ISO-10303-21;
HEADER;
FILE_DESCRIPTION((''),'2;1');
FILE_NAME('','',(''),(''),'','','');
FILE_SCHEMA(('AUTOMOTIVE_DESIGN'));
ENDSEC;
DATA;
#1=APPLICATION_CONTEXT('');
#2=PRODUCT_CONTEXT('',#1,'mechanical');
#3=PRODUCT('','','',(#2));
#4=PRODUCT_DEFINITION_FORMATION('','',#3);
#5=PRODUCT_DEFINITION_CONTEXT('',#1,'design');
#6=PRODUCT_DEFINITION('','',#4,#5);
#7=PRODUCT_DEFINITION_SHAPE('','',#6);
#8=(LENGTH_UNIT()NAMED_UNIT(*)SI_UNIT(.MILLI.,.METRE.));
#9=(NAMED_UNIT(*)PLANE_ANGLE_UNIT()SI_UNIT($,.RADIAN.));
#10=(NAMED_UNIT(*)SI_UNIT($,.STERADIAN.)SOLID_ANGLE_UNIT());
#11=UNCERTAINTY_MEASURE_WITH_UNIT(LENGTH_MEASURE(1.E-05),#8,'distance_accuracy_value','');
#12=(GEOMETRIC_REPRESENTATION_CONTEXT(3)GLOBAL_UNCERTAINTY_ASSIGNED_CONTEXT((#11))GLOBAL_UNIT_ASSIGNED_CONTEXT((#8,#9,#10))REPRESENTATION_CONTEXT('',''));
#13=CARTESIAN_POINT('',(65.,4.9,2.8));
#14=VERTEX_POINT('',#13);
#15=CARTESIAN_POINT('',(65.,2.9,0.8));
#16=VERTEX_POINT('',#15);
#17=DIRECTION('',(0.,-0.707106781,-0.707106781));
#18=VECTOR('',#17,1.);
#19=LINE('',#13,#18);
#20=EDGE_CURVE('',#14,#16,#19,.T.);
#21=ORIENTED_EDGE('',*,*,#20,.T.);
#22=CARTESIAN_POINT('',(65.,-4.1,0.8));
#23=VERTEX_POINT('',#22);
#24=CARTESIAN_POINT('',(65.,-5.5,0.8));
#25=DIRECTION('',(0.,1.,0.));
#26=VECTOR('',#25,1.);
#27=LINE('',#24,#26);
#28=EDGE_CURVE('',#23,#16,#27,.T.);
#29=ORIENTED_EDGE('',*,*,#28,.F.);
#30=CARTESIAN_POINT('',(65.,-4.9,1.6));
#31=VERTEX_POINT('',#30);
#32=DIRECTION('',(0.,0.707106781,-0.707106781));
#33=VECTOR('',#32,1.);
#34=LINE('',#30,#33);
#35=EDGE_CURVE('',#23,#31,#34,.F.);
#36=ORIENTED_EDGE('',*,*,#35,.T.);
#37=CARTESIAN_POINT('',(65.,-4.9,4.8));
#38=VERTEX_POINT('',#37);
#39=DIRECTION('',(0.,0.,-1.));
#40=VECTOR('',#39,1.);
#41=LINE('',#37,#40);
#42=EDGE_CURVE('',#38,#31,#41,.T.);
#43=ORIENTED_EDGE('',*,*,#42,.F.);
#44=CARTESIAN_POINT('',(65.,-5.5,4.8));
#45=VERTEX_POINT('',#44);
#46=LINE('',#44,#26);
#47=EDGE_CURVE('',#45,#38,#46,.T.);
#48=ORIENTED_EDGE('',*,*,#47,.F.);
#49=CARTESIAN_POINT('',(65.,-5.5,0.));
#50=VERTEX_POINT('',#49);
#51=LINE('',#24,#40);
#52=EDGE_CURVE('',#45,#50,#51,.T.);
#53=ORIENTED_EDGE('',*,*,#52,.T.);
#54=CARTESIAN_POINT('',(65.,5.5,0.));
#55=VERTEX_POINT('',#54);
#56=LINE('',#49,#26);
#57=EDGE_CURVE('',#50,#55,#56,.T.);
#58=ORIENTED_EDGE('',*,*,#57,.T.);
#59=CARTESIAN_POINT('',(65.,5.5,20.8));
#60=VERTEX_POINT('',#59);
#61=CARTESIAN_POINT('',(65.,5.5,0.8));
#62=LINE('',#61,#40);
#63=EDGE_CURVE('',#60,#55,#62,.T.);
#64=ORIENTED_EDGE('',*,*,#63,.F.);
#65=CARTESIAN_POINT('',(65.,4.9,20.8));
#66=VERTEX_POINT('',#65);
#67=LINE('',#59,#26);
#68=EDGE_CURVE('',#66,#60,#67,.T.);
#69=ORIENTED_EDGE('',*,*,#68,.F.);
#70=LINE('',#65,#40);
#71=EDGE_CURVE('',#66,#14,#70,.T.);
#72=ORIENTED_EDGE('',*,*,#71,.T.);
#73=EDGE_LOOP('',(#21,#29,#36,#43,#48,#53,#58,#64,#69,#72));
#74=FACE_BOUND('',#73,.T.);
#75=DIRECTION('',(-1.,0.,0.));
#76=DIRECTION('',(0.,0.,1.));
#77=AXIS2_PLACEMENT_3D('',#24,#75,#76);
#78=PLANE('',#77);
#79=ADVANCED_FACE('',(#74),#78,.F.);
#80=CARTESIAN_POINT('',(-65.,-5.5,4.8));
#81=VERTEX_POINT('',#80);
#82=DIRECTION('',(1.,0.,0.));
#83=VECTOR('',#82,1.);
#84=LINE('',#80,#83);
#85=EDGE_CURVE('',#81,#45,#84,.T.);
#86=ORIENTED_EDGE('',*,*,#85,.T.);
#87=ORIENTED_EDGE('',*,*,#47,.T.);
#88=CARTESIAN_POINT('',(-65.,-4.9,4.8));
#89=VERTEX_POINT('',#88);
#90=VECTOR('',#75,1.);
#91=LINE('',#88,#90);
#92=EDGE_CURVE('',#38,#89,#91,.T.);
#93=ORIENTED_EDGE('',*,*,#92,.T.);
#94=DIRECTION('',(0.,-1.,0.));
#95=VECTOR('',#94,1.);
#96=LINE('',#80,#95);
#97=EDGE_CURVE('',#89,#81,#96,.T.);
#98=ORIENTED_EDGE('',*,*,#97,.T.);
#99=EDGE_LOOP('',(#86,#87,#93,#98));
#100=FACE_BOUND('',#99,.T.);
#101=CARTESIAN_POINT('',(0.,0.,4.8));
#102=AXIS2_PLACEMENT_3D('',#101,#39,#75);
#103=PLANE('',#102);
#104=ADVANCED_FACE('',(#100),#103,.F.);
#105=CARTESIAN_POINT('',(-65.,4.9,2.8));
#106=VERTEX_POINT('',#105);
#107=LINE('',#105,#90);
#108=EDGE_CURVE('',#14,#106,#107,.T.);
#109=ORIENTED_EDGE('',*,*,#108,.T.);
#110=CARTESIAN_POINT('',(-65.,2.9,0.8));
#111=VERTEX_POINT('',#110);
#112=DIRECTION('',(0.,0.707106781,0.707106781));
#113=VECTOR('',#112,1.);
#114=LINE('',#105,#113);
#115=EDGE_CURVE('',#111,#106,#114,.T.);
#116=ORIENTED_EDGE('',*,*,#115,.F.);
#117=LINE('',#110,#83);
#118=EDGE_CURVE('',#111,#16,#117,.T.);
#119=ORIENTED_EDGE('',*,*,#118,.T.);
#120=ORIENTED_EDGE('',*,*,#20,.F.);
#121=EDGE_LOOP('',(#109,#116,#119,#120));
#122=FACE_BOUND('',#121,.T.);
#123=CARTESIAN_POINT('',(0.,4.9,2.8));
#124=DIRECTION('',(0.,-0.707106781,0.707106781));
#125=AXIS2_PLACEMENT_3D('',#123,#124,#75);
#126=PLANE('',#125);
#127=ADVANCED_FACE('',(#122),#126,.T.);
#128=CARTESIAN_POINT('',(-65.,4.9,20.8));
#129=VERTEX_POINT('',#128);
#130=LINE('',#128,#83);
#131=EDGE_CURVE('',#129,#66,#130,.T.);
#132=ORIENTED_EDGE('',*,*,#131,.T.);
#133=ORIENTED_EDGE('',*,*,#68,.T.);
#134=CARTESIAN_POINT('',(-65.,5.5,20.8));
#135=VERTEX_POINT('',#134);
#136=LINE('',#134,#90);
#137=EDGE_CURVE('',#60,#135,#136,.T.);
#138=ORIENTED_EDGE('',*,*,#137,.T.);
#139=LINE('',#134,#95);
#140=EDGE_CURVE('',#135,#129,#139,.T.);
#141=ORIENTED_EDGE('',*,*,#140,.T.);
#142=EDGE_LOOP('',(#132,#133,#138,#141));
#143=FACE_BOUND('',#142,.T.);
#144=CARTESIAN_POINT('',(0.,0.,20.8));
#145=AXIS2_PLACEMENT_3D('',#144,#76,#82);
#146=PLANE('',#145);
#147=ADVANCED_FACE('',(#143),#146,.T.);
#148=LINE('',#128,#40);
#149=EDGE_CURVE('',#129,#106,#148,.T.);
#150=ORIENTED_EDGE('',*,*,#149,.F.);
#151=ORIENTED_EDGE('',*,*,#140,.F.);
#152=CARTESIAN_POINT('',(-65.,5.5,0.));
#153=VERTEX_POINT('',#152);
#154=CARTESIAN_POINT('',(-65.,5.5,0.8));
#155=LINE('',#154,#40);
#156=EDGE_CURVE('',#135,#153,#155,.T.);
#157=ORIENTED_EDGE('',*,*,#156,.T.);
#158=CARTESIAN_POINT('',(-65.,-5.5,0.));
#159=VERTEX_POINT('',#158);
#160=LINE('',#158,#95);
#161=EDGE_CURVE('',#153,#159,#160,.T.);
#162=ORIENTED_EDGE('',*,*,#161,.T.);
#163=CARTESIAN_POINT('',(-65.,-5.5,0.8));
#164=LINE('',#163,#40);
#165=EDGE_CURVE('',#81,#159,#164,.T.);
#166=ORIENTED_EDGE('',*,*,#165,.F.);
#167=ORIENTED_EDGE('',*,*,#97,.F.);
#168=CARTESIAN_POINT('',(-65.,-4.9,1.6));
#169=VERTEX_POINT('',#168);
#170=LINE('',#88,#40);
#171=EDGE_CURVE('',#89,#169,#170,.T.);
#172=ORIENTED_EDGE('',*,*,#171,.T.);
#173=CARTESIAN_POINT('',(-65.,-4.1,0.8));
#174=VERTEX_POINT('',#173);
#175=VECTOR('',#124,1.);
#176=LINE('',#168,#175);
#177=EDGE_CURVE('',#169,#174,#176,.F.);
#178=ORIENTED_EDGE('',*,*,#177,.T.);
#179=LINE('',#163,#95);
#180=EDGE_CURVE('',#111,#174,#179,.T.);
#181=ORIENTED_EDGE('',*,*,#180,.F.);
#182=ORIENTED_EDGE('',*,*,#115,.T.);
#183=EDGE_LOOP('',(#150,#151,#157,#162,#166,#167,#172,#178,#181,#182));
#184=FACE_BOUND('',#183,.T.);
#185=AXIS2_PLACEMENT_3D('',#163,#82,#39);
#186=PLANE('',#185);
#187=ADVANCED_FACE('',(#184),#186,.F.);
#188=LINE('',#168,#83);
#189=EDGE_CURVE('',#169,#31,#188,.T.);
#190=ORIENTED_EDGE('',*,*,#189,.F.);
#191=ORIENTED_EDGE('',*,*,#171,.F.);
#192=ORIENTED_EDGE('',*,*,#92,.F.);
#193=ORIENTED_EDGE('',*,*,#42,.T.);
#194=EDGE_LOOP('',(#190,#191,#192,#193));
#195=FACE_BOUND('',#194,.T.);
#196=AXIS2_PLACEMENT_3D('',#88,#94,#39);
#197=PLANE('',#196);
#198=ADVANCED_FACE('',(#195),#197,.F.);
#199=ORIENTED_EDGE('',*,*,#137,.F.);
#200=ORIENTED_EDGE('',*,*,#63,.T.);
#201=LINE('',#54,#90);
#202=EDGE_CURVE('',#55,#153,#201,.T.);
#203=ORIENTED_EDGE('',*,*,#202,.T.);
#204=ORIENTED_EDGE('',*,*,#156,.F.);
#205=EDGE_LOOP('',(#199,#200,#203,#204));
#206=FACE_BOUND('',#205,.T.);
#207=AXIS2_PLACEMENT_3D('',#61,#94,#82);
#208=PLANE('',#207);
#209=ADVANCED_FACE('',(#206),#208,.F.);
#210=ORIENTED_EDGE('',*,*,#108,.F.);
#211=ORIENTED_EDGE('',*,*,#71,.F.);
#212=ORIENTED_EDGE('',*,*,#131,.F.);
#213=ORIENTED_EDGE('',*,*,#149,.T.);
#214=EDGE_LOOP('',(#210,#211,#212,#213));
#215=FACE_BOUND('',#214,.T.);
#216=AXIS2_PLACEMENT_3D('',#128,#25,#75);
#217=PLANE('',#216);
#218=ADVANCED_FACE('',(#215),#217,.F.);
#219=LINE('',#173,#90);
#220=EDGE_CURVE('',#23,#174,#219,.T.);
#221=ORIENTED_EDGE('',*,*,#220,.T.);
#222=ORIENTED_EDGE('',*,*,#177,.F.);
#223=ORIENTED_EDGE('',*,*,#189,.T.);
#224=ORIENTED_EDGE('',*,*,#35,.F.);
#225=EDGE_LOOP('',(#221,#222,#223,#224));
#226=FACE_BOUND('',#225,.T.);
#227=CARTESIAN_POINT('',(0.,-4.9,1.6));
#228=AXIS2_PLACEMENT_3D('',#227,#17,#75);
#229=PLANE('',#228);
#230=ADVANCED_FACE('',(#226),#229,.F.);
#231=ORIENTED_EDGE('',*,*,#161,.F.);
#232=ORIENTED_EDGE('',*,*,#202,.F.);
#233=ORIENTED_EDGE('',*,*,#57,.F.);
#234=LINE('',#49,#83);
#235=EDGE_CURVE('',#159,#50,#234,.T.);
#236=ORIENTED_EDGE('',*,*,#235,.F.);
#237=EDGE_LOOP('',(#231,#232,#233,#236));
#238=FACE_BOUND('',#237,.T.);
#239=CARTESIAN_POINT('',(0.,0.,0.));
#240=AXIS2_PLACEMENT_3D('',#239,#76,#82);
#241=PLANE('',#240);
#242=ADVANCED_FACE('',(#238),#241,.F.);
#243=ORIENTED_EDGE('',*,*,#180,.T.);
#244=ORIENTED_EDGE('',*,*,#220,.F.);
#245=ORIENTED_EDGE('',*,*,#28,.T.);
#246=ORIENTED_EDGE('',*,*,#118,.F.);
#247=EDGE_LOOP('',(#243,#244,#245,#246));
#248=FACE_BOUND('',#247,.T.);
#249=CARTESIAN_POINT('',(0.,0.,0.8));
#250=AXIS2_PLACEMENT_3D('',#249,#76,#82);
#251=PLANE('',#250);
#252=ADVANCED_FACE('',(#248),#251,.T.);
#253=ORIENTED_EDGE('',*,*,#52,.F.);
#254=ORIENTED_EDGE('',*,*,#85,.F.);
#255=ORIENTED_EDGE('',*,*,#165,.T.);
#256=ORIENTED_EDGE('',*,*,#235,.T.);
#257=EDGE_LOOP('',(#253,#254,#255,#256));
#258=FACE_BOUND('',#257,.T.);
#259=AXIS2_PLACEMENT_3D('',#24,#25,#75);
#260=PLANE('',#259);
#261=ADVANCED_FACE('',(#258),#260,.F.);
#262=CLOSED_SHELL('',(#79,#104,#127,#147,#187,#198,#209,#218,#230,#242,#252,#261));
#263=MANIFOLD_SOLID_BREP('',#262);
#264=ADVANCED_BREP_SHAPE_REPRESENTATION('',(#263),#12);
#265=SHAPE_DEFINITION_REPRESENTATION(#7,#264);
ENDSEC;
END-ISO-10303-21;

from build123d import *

# Parameters (mm, degrees)
SKETCH_1_W      = 130
SKETCH_1_H      = 11
EXTRUDE_1_DEPTH = 0.8
SKETCH_2_W      = 130
SKETCH_2_H      = 0.6
EXTRUDE_2_DEPTH = 20
SKETCH_3_W      = 130
SKETCH_3_H      = 2
EXTRUDE_3_DEPTH = 2
CHAMFER_1_SIZE  = 2
SKETCH_4_W      = 130
SKETCH_4_H      = 0.6
EXTRUDE_4_DEPTH = 4
SKETCH_5_W      = 130
SKETCH_5_H      = 0.8
EXTRUDE_5_DEPTH = 0.8
CHAMFER_2_SIZE  = 0.8


with BuildPart() as part:
    # 草图1 → 凸台-拉伸1 (new body)
    with BuildSketch(Plane.XY):
        Rectangle(SKETCH_1_W, SKETCH_1_H)
    extrude(amount=EXTRUDE_1_DEPTH)

    # 草图2 → 凸台-拉伸2 (add)
    with BuildSketch(Plane.XY.offset(0.8)):
        with Locations((0, 5.2)):
            Rectangle(SKETCH_2_W, SKETCH_2_H)
    extrude(amount=EXTRUDE_2_DEPTH)

    # 草图3 → 凸台-拉伸3 (add)
    with BuildSketch(Plane.XY.offset(0.8)):
        with Locations((0, 3.9)):
            Rectangle(SKETCH_3_W, SKETCH_3_H)
    extrude(amount=EXTRUDE_3_DEPTH)

    # 倒角1
    chamfer_1_edges = [part.edges().sort_by_distance(p)[0] for p in [
        (0, 2.9, 2.8),
    ]]
    chamfer(chamfer_1_edges, length=CHAMFER_1_SIZE - 0.0001)  # a hair under: the kernel refuses the full size

    # 草图4 → 凸台-拉伸4 (add)
    with BuildSketch(Plane.XY.offset(0.8)):
        with Locations((0, -5.2)):
            Rectangle(SKETCH_4_W, SKETCH_4_H)
    extrude(amount=EXTRUDE_4_DEPTH)

    # 草图5 → 凸台-拉伸5 (add)
    with BuildSketch(Plane.XY.offset(0.8)):
        with Locations((0, -4.5)):
            Rectangle(SKETCH_5_W, SKETCH_5_H)
    extrude(amount=EXTRUDE_5_DEPTH)

    # 倒角2
    chamfer_2_edges = [part.edges().sort_by_distance(p)[0] for p in [
        (0, -4.1, 1.6),
    ]]
    chamfer(chamfer_2_edges, length=CHAMFER_2_SIZE - 0.0001)  # a hair under: the kernel refuses the full size


solid = part.part
